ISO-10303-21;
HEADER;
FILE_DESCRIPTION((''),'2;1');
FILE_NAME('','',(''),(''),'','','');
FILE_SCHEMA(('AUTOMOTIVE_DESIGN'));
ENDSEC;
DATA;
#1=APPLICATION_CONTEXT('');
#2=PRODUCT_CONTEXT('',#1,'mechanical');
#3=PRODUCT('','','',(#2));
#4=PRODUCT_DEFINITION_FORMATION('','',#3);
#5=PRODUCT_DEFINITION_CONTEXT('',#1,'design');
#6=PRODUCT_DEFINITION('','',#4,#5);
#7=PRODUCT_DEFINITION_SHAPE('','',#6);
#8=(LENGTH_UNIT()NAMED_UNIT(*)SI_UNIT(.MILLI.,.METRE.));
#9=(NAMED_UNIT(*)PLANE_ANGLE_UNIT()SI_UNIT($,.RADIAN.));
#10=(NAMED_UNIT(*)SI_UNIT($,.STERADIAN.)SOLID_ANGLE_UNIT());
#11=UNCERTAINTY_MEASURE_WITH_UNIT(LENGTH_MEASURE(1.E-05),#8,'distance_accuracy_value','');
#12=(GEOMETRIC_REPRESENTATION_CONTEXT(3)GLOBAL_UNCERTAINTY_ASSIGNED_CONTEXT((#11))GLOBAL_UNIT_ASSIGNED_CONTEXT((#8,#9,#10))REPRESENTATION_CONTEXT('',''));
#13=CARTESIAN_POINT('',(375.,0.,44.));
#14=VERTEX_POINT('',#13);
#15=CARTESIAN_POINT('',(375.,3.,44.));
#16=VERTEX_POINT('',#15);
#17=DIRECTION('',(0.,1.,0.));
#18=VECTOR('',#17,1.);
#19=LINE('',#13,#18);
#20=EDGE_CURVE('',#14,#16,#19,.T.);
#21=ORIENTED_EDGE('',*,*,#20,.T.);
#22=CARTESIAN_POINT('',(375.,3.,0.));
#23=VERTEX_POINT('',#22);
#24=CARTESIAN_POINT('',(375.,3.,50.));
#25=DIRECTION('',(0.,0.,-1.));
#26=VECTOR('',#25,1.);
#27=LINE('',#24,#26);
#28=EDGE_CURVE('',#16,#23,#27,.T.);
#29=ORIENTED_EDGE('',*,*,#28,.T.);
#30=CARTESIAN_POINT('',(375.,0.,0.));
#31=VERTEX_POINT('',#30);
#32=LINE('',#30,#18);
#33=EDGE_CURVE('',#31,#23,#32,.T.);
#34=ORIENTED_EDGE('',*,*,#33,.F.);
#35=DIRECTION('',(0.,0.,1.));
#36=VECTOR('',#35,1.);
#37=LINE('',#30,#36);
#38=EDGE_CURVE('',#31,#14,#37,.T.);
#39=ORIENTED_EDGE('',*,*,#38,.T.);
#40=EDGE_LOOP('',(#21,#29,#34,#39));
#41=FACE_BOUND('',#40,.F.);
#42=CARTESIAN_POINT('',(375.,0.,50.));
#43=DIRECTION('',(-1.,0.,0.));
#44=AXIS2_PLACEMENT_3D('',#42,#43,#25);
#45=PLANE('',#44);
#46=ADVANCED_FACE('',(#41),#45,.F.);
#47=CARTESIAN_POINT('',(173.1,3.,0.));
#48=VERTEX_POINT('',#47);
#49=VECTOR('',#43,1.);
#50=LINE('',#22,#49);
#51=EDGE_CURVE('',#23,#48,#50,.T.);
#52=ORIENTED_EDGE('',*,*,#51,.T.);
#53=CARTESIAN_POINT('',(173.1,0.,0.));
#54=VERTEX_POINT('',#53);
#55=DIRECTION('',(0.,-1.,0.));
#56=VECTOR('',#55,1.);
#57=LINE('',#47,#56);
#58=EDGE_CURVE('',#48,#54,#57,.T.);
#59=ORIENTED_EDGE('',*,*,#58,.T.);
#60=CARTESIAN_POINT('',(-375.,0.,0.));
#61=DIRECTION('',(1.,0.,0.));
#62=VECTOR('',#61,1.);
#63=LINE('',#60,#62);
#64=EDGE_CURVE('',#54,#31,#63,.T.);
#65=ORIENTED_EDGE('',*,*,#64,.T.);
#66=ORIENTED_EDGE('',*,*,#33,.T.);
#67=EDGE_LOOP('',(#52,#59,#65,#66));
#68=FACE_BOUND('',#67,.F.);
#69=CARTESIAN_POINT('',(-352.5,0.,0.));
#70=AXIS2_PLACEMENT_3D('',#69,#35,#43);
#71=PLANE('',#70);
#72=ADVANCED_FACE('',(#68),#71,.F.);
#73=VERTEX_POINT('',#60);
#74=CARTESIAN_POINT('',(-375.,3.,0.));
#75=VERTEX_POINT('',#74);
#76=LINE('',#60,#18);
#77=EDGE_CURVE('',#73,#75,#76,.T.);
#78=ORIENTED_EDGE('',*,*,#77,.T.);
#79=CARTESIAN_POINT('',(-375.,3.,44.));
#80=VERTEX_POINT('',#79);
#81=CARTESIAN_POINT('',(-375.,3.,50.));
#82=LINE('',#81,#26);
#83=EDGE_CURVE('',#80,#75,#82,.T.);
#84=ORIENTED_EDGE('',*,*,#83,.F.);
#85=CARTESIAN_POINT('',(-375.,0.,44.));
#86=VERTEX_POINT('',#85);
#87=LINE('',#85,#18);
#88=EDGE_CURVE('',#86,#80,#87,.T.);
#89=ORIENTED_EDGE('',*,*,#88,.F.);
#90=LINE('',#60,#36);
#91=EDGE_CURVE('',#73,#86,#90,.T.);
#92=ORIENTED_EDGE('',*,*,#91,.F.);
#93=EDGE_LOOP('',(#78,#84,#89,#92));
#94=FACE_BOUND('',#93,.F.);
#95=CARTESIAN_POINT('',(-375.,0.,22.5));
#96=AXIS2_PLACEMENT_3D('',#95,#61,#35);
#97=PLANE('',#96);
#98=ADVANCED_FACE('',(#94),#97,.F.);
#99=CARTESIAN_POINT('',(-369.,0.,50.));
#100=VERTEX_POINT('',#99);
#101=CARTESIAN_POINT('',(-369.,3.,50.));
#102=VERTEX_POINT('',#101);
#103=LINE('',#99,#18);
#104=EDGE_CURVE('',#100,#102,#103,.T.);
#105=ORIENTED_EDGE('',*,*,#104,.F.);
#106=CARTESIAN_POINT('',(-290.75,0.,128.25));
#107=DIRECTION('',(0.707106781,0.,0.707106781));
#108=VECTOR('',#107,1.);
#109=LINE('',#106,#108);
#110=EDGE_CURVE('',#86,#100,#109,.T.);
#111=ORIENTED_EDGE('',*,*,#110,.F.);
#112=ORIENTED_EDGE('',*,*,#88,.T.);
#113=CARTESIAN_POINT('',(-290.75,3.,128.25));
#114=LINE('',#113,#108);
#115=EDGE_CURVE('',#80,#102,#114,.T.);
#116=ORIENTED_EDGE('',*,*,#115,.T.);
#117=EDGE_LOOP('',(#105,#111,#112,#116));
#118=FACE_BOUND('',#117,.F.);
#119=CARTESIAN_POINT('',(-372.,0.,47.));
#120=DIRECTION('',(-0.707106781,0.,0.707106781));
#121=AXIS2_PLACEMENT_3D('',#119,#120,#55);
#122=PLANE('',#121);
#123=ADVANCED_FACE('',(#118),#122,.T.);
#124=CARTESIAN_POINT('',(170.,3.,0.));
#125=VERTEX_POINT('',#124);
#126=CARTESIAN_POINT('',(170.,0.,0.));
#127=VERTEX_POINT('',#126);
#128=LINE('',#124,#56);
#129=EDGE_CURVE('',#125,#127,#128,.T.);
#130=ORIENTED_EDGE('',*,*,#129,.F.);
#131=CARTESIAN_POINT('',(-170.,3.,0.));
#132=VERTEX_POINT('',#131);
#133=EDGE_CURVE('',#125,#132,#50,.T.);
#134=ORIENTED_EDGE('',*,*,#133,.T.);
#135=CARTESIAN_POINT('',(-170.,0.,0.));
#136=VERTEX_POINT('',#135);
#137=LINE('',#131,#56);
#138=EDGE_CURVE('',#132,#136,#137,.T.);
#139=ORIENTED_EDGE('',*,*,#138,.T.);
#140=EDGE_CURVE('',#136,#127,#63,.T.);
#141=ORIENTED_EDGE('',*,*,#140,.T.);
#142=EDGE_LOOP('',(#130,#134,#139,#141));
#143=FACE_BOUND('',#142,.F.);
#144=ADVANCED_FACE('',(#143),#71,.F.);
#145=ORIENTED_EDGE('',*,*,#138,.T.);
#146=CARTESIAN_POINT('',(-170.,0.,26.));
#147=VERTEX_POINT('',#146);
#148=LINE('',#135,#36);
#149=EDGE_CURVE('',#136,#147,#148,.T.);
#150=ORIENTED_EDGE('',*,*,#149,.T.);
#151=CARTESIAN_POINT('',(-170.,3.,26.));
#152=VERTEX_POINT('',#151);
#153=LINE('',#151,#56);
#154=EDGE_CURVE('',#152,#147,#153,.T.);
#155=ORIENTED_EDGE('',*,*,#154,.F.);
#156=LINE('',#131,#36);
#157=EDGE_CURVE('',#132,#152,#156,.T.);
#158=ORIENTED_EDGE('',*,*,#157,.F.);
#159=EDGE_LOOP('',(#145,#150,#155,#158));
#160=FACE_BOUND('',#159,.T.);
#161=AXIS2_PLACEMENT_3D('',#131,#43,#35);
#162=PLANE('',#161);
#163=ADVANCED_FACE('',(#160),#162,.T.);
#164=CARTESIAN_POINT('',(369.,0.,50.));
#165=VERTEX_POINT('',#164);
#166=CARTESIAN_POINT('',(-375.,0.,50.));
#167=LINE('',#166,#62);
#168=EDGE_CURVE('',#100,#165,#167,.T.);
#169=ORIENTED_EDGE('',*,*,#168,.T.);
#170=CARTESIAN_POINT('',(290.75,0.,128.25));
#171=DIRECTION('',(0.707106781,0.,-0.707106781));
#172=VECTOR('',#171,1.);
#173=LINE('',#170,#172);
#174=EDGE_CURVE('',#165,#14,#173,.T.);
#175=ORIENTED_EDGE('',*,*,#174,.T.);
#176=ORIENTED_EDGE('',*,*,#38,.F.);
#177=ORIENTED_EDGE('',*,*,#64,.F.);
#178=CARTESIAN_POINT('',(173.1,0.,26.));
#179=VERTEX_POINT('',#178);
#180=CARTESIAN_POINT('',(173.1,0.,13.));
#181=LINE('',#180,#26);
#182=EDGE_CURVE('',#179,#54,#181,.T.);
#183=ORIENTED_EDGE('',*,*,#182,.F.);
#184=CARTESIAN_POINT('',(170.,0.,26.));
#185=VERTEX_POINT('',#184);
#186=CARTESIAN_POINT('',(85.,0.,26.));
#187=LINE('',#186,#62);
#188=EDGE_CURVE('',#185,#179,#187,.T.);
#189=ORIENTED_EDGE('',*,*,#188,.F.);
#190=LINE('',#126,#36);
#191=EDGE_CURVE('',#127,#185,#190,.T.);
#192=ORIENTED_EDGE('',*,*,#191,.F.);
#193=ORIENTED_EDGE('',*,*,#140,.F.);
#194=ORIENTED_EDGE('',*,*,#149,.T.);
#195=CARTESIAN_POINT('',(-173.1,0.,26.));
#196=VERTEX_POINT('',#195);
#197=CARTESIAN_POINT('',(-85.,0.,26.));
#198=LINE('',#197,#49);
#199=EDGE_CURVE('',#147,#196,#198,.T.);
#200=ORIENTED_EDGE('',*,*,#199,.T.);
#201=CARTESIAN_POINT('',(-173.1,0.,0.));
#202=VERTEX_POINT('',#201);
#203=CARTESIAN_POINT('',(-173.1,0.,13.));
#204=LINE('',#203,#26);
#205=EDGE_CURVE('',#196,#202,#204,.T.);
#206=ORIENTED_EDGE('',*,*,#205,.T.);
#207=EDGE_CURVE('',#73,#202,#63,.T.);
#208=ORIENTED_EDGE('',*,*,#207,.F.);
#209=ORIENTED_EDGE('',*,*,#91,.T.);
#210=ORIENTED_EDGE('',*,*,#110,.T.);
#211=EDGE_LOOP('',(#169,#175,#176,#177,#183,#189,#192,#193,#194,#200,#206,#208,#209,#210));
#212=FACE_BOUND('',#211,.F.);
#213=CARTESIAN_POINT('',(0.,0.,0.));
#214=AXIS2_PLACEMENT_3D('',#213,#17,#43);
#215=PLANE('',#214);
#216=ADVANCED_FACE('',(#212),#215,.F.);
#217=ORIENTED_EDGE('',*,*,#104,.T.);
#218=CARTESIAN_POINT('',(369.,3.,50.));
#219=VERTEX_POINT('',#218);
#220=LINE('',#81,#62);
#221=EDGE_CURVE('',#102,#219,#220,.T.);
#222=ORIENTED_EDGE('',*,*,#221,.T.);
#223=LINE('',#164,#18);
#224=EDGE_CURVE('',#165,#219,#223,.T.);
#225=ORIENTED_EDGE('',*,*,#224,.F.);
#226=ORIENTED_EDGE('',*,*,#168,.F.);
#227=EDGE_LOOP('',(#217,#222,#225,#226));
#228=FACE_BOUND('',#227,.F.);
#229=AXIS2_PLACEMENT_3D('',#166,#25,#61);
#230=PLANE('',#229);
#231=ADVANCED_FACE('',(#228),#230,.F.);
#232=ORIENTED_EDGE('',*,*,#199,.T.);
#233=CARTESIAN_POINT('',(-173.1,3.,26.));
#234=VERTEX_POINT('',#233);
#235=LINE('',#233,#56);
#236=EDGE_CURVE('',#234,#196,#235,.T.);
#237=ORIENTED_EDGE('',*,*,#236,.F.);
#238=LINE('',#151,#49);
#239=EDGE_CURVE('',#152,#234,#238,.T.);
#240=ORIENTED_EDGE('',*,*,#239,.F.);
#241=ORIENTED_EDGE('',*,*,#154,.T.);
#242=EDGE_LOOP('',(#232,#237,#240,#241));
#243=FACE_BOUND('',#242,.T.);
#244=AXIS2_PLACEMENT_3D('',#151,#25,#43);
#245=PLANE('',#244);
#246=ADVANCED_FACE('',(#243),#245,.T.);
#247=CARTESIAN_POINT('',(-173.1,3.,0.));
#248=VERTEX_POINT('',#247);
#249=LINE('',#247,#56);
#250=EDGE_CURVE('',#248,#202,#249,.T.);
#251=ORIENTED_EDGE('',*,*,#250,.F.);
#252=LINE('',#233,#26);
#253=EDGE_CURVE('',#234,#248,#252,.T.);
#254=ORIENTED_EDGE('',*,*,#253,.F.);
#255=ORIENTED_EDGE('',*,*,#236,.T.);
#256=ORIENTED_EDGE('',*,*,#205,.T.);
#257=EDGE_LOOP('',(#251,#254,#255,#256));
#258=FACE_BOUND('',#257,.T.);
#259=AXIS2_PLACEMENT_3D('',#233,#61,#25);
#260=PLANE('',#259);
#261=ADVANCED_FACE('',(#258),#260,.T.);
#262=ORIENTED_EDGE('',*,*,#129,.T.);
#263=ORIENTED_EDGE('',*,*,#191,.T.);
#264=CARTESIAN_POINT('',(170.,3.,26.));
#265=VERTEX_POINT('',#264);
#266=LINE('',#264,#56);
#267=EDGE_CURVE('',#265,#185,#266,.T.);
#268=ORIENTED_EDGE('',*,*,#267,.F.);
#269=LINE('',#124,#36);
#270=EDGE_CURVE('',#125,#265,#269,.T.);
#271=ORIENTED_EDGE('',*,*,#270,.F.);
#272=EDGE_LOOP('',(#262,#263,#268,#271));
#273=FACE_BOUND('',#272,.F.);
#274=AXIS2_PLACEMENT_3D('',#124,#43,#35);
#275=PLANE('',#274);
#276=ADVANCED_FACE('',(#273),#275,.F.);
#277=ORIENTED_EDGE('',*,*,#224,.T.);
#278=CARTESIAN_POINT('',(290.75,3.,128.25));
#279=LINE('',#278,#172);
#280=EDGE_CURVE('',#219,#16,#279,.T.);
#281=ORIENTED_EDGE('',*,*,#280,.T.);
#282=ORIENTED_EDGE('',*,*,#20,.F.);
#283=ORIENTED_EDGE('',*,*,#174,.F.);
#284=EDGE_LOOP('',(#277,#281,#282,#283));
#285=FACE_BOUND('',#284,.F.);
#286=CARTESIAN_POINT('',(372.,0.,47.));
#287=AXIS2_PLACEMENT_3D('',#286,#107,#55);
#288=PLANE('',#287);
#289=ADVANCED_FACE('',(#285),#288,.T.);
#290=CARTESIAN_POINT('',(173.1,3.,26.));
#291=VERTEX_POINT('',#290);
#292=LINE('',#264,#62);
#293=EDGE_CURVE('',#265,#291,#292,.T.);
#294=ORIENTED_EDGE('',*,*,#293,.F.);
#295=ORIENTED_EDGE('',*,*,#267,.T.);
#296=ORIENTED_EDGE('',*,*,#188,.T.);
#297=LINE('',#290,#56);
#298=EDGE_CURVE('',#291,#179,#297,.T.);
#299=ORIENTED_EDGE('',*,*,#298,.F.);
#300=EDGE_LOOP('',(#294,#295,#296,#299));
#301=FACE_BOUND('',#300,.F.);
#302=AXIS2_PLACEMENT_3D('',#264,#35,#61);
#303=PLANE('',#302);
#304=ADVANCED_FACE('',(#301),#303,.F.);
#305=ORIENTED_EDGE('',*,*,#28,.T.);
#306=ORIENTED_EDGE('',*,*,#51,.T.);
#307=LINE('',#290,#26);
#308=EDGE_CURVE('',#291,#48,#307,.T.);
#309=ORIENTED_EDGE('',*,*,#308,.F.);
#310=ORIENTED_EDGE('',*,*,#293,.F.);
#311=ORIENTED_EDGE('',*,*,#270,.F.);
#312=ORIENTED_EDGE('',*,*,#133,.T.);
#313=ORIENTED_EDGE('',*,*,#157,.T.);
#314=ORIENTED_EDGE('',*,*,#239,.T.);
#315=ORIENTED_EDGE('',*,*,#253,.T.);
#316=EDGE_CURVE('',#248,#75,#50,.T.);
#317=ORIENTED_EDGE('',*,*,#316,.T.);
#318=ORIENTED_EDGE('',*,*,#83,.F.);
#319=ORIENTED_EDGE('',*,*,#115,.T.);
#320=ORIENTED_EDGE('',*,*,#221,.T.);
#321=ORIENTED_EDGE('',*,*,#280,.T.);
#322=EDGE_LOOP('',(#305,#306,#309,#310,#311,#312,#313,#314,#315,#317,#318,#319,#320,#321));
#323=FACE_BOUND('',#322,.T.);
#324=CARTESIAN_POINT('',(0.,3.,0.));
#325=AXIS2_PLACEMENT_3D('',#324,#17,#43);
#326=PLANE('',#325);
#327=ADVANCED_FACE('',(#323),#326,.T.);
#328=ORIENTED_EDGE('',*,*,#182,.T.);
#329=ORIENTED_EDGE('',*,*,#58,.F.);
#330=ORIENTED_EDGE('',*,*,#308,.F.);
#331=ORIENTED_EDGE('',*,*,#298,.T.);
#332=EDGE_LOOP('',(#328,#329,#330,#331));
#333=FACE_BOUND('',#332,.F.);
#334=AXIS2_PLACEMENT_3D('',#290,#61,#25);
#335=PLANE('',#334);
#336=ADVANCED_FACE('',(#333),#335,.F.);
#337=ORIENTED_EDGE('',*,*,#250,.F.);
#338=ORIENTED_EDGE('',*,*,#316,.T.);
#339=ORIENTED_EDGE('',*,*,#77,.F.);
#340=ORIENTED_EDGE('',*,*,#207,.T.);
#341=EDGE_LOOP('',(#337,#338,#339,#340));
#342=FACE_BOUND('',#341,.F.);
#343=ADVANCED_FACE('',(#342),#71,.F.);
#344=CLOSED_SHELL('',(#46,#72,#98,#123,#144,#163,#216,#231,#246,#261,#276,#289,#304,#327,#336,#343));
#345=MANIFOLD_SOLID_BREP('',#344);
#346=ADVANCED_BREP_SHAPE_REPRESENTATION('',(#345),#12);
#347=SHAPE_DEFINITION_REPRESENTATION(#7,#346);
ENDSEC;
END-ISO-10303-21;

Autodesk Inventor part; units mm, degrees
ref_plane "YZ Plane" through (0, 0, 0) normal (1, 0, 0) x (0, 1, 0)
ref_plane "XZ Plane" through (0, 0, 0) normal (0, 1, 0) x (-1, 0, 0)
ref_plane "XY Plane" through (0, 0, 0) normal (0, 0, 1) x (1, 0, 0)
sketch "Sketch2" plane through (0, 0, 0) normal (0, 1, 0) x (-1, 0, 0)
  line L0 (375, 50) -> (-375, 50)
  line L1 (-375, 50) -> (-375, 0)
  line L2 (-375, 0) -> (375, 0)
  line L3 (375, 0) -> (375, 50)
  circle A0 centre (-375, 0) radius 22.5
  circle A1 centre (375, 0) radius 22.5
  point P0 (0, 0)
  point P1 (0, 0)
  point P2 (-375, 22.5)
  point P3 (-352.5, 0)
  point P4 (352.5, 0)
  point P5 (375, 22.5)
  dimension "d18" = 750
  dimension "d19" = 50
  dimension "d20" = 45
extrude "Plate2" add sketch "Sketch2" along normal blind 3 contours L3 A1 L2 A0 L1 L0 | L3 L2 A1 | A0 L2 L1 picked at (360.188, 1.6689) picked at (-360.9308, 4.923)
sketch "Sketch3" plane through (0, 3, 0) normal (0, 1, 0) x (1, 0, 0)
  line L0 (-171.55, 0) -> (-171.55, -50) construction
  line L1 (-375, -50) -> (375, -50) construction
  line L2 (-375, -50) -> (-375, 0) projected
  line L3 (-173.1, 0) -> (-170, 0)
  line L4 (-170, 0) -> (-170, -26)
  line L5 (-170, -26) -> (-173.1, -26)
  line L6 (-173.1, -26) -> (-173.1, 0)
  line L7 (-375, 0) -> (375, 0) projected
  line L8 (375, 0) -> (-375, 0) projected
  line L9 (171.55, 0) -> (171.55, -50) construction
  line L10 (170, -26) -> (173.1, -26)
  line L11 (173.1, -26) -> (173.1, 0)
  line L12 (173.1, 0) -> (170, 0)
  line L13 (170, 0) -> (170, -26)
  line L14 (0, 0) -> (0, -50) construction
  point P0 (0, 0)
  point P1 (0, 0)
  point P2 (170, 0)
  point P3 (173.1, 0)
  dimension "d24" = 26
  dimension "d44" = 3.1
  dimension "d45" = 340
extrude "Extrusion1" cut sketch "Sketch3" against normal through all
sketch "Sketch5" plane through (0, 0, 0) normal (0, -1, 0) x (1, 0, 0)
  line L0 (-57.747, 1.3029) -> (-57.747, 31.8939) construction
  line L1 (-57.747, 31.8939) -> (96.7716, 31.8939) construction
  line L2 (96.7716, 31.8939) -> (96.7716, 1.3029) construction
  line L3 (96.7716, 1.3029) -> (-57.747, 1.3029) construction
  point P0 (0, 0)
mark "Mark1"
chamfer "Corner Chamfer2" distance 6 angle 45 2 edges at (375, 1.5, 50) (-375, 1.5, 50)
equation "\"d21\" = Thickness"
equation "\"BendReliefWidth\" = Thickness"
equation "\"BendReliefDepth\" = 0.5 * Thickness"
equation "\"CornerReliefSize\" = 4 * Thickness"
equation "\"MinimumRemnant\" = 2 * Thickness"
equation "\"TransitionRadius\" = BendRadius"
equation "\"JacobiRadiusSize\" = BendRadius"
equation "\"GapSize\" = Thickness"
equation "\"Thickness\" = 3"
equation "\"BendRadius\" = 5"
properties part number "MSC 107 RIB CONE" material "Stainless Steel"
